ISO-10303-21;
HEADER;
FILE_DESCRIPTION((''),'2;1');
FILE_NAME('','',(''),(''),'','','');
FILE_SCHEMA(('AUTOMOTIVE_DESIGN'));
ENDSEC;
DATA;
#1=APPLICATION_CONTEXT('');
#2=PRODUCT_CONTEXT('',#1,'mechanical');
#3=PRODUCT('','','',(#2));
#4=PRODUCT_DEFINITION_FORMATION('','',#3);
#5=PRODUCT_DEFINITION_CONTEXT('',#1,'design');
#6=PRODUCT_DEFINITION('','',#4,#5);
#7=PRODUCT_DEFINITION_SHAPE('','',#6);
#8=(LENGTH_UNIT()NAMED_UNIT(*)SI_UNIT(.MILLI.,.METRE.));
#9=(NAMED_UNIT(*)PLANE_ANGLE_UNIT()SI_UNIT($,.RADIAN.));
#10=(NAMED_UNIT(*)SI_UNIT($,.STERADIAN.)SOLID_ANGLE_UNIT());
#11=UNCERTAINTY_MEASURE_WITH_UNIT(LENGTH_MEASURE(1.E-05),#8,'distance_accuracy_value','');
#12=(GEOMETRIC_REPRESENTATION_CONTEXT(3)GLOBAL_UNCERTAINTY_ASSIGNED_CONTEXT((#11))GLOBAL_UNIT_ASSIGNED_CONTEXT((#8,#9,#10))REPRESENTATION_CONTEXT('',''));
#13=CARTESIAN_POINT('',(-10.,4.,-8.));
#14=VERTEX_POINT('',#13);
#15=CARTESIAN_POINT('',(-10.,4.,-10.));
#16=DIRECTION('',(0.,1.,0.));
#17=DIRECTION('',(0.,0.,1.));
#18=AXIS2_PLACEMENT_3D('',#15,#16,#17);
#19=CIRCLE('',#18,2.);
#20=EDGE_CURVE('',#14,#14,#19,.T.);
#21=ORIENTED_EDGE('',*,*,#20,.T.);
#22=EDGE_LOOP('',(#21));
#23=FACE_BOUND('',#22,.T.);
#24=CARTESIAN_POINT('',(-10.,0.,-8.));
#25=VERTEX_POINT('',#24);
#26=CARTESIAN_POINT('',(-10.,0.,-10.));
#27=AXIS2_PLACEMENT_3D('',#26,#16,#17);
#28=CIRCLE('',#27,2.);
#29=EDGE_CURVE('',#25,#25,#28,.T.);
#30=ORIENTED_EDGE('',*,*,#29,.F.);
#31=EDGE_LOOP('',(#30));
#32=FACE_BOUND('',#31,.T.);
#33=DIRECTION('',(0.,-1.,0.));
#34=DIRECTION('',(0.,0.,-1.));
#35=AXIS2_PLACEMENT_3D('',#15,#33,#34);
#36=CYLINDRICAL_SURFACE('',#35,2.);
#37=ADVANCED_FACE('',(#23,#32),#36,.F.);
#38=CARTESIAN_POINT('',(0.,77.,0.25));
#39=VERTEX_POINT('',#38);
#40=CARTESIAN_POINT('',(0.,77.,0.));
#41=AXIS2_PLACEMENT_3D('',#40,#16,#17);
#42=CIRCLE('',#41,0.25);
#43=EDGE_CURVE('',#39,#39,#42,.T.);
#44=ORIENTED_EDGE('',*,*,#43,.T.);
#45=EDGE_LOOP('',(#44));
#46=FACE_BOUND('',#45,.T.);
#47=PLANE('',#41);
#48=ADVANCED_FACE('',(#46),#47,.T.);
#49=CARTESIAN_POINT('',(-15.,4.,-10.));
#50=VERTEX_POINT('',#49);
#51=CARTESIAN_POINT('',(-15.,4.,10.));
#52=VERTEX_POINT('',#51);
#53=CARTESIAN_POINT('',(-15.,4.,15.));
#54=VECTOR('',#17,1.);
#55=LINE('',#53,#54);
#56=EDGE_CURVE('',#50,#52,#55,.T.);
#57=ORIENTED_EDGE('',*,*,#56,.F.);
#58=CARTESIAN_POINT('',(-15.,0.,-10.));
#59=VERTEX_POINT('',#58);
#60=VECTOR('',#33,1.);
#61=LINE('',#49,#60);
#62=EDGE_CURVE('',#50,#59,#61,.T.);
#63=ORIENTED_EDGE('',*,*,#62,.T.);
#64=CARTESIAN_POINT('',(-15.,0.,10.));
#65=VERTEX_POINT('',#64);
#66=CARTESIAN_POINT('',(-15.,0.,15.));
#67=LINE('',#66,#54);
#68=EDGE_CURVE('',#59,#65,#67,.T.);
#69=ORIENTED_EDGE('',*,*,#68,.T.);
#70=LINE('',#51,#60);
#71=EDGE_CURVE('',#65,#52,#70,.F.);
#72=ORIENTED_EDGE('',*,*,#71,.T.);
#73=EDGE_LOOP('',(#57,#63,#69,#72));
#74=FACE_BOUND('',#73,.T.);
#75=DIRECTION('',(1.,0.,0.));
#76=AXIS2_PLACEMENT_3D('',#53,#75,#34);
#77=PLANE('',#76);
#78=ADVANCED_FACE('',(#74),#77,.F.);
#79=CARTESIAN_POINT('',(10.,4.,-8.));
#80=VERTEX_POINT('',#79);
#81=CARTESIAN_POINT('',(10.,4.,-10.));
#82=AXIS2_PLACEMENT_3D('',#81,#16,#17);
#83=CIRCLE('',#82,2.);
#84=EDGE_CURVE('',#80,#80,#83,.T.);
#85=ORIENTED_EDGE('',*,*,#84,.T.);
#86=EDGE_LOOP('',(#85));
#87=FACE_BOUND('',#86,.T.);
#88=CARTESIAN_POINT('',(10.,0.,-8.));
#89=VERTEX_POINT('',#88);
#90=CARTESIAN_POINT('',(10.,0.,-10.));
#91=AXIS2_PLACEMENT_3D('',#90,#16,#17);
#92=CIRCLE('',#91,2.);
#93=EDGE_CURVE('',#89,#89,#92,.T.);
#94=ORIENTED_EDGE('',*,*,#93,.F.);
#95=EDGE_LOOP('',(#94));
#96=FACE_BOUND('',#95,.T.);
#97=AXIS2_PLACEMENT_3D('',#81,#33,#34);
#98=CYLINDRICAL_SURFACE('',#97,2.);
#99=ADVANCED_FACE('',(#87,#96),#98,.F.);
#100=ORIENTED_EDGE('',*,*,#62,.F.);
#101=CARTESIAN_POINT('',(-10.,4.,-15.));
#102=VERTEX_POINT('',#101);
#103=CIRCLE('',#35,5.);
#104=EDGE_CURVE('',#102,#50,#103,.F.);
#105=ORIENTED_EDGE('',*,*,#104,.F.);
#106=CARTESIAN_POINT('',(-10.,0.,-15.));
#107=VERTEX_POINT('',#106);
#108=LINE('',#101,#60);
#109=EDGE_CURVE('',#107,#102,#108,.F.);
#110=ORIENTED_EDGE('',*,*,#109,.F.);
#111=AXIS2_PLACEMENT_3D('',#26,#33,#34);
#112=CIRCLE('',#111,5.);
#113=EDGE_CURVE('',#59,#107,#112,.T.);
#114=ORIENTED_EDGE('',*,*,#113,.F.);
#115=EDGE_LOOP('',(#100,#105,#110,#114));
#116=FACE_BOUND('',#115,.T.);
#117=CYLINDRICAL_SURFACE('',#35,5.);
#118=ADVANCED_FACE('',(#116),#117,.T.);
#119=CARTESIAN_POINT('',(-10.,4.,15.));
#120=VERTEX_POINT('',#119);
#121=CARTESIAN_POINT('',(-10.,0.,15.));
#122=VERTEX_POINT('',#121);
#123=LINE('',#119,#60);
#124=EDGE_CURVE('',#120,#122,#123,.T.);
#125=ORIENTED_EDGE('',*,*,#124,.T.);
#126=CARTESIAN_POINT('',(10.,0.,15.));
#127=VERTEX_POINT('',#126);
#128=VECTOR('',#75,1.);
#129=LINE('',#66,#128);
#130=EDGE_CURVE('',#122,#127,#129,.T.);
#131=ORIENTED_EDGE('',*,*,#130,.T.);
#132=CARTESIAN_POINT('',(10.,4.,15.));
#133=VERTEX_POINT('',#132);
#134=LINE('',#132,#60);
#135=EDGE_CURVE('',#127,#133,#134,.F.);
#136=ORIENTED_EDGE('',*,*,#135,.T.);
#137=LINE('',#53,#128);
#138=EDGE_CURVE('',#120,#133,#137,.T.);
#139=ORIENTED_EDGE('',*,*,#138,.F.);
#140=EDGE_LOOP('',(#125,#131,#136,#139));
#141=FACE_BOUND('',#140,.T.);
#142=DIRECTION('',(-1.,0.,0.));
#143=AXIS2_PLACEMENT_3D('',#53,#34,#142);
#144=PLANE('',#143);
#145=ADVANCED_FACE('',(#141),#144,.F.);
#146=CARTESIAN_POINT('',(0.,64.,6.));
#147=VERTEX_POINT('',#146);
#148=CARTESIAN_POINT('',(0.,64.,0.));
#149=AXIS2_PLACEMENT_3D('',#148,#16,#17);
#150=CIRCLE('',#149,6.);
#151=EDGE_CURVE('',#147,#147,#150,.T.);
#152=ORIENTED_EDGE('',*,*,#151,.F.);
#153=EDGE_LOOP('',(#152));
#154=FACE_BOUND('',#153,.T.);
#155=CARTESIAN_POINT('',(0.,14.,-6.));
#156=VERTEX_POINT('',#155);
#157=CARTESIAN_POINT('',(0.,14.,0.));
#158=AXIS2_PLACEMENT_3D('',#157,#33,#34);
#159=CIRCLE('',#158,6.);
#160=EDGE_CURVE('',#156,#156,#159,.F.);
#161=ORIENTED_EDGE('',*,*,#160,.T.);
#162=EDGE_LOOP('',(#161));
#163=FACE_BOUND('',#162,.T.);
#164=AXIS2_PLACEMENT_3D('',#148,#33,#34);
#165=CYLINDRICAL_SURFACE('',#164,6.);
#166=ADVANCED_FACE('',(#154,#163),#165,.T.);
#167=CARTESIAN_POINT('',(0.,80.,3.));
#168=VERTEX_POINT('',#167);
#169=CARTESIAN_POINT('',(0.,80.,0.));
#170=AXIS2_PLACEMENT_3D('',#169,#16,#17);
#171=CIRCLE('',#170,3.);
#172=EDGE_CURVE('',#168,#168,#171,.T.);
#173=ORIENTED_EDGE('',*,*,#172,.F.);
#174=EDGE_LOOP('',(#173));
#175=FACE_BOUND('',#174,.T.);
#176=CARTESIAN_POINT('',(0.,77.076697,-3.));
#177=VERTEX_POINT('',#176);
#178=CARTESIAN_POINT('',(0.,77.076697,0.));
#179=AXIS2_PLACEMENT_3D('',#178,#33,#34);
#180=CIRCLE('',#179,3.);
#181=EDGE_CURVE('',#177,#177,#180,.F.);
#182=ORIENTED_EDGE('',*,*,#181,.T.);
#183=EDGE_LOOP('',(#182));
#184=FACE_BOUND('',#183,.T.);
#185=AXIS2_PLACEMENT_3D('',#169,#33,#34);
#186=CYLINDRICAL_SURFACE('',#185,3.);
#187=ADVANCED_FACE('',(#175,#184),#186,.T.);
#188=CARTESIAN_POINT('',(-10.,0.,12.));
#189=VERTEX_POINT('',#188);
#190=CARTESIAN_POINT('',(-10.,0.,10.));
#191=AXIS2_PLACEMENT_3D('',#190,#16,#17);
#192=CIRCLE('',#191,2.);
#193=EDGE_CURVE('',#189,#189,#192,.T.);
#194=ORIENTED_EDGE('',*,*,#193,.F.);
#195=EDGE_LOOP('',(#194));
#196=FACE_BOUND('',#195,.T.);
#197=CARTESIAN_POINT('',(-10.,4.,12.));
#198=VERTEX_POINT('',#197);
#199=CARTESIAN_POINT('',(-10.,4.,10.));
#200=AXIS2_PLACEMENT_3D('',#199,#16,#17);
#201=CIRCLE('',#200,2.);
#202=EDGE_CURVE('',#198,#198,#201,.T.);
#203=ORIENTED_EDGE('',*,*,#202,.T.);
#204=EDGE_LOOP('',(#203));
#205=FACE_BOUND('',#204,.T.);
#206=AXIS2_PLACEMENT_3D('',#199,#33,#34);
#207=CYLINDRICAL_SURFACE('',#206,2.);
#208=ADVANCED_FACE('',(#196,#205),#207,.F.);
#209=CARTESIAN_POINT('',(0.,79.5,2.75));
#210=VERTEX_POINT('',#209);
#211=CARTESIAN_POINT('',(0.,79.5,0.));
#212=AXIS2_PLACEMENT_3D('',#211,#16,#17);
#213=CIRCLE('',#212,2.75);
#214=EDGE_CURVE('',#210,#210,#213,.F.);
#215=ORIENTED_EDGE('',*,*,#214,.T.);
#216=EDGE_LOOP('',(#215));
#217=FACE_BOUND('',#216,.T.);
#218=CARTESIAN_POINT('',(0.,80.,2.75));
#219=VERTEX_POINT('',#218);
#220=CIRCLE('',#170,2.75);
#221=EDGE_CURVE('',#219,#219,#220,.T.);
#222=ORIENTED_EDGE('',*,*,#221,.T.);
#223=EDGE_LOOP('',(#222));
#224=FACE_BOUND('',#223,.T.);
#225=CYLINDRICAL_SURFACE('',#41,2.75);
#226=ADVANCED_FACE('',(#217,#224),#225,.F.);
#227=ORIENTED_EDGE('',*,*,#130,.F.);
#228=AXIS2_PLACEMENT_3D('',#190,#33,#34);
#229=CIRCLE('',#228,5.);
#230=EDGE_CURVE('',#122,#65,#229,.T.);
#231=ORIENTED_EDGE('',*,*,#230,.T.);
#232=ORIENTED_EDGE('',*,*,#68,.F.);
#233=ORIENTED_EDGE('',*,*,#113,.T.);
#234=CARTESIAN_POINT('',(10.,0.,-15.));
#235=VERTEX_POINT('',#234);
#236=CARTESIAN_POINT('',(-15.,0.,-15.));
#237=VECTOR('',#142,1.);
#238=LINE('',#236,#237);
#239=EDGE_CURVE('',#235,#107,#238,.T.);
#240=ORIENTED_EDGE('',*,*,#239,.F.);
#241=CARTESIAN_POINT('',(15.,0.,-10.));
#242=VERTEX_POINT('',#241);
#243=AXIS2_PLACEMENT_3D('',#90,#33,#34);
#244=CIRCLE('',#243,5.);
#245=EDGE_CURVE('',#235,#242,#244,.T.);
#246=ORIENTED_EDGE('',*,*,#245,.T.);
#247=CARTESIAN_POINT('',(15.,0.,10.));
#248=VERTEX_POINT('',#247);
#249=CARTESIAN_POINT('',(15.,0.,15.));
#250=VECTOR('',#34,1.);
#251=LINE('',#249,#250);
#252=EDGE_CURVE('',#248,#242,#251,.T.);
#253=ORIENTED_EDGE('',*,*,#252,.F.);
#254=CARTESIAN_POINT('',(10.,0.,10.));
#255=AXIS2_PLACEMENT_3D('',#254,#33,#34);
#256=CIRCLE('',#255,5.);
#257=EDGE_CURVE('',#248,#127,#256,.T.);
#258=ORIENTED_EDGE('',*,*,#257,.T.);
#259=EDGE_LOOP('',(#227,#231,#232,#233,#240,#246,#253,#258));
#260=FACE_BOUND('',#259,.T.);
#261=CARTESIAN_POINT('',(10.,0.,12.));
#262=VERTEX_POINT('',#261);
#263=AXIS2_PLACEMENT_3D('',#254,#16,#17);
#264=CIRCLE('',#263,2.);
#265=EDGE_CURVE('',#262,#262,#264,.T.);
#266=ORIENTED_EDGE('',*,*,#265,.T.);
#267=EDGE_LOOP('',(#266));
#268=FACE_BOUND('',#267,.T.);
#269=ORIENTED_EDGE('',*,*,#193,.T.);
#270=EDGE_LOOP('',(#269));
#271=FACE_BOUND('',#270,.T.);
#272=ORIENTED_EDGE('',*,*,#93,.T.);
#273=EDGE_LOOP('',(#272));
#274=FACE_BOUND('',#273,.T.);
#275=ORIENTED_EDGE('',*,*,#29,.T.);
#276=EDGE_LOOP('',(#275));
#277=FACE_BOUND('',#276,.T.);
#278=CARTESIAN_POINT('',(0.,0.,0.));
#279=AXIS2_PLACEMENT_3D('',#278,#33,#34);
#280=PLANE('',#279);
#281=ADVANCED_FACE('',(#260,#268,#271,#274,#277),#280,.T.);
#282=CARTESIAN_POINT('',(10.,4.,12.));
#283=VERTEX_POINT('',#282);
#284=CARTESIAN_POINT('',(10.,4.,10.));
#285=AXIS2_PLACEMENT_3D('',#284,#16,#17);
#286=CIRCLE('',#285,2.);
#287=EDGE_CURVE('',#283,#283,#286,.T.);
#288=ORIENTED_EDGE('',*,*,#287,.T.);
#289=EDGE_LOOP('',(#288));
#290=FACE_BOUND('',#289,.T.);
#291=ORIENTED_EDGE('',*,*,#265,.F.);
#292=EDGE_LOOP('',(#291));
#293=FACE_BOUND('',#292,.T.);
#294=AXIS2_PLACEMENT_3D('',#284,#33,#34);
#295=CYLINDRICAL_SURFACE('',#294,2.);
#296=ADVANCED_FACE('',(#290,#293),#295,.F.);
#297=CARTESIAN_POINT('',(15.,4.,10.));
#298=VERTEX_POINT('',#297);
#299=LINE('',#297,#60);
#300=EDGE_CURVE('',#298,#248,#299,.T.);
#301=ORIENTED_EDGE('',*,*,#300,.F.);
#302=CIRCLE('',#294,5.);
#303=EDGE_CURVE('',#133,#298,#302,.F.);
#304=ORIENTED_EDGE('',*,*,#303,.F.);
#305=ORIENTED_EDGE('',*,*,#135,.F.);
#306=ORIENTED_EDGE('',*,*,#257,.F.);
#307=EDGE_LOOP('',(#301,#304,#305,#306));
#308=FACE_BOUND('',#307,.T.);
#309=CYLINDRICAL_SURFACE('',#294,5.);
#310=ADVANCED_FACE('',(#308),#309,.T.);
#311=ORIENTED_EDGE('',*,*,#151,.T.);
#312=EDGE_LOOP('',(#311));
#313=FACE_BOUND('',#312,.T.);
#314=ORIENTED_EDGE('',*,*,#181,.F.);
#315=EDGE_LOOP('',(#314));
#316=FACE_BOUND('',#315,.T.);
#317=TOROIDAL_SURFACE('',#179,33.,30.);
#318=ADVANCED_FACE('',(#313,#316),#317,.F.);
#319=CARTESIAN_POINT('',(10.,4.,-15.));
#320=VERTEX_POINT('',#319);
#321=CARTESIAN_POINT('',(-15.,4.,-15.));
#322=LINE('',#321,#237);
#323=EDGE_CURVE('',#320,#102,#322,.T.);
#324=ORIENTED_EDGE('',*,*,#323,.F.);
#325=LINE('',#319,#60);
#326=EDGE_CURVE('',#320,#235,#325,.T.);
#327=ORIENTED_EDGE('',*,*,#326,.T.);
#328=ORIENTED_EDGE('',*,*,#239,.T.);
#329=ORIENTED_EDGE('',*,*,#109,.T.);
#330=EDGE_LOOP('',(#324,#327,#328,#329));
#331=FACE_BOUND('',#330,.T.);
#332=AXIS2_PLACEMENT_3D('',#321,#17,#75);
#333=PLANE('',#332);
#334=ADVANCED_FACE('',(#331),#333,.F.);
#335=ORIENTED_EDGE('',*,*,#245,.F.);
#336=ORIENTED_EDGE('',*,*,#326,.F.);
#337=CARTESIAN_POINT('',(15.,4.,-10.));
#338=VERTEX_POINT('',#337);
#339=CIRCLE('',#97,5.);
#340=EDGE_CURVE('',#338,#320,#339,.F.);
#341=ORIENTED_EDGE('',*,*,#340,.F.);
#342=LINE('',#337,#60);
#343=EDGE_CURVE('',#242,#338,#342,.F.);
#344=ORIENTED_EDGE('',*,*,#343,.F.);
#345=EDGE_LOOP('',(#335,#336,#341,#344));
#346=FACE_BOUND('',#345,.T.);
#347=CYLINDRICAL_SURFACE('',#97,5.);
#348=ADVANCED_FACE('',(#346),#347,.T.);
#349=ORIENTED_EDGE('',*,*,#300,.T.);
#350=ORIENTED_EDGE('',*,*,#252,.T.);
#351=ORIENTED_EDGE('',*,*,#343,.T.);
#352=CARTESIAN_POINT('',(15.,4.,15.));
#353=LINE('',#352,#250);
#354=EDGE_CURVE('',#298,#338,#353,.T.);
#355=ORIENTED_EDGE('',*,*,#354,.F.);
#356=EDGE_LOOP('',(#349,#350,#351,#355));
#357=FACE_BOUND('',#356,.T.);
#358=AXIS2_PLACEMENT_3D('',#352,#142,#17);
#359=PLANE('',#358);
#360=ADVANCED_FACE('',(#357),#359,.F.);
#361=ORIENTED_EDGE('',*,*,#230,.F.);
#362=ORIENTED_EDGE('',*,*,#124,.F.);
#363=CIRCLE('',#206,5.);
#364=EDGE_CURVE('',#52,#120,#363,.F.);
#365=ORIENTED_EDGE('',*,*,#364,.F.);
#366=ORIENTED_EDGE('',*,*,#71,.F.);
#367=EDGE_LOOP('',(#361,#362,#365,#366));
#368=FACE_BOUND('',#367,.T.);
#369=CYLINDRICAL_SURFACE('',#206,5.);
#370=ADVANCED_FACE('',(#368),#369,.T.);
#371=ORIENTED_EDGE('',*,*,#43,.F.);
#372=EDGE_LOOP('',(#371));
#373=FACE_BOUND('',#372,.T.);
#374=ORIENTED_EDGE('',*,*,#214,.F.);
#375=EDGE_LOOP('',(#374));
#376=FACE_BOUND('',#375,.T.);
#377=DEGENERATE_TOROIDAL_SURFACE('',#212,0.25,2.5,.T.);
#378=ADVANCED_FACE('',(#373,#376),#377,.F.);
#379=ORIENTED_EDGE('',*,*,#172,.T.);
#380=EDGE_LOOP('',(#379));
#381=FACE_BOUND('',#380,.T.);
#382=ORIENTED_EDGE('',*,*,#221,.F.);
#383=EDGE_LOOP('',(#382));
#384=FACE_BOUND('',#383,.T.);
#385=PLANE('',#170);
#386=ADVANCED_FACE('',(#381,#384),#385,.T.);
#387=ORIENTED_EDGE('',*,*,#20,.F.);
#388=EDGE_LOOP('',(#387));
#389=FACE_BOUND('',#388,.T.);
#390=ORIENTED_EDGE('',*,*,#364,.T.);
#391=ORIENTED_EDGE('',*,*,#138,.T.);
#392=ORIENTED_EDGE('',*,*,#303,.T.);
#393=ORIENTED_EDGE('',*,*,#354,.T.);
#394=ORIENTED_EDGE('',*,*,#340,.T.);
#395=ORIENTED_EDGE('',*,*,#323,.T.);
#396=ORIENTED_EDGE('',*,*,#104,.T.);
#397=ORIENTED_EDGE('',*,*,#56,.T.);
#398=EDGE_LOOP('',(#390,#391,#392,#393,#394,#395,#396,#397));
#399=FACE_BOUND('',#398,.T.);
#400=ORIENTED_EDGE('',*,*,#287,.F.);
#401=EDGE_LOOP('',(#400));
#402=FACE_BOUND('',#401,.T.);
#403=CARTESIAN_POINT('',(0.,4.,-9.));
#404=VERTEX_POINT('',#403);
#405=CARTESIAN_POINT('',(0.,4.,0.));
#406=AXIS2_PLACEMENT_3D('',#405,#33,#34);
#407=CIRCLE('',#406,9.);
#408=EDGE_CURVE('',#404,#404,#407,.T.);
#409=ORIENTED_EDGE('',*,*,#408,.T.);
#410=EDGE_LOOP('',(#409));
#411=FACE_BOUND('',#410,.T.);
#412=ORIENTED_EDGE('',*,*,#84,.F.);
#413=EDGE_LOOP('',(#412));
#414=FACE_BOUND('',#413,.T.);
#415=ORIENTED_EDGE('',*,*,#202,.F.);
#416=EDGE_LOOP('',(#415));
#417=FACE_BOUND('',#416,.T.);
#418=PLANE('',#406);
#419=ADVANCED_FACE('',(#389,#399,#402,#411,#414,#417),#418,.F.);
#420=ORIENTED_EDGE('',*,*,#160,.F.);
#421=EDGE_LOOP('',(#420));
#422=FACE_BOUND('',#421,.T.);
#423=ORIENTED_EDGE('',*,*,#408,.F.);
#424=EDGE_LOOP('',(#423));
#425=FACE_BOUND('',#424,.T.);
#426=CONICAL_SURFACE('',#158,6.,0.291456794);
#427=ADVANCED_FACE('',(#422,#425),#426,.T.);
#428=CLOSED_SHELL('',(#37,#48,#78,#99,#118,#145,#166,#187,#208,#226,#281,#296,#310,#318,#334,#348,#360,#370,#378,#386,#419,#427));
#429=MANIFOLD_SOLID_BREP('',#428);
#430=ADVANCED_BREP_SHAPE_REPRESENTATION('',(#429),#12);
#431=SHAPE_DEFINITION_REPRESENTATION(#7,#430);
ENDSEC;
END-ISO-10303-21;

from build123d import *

# Parameters (mm, degrees)
SKETCH_1_W          = 30
SKETCH_1_H          = 30
SKETCH_1_R          = 2
EXTRUDE_1_DEPTH     = 4
FILLET_1_R          = 5
SKETCH_2_R          = 6
EXTRUDE_2_DEPTH     = 60
SKETCH_3_R          = 3
EXTRUDE_3_DEPTH     = 16
FILLET_2_R          = 30
SKETCH_4_R          = 2.75
CUT_EXTRUDE_1_DEPTH = 3
FILLET_3_R          = 2.5
CHAMFER_4_SIZE      = 10
CHAMFER_4_SIZE2     = 3


with BuildPart() as part:
    # Эскиз1 → Бобышка-Вытянуть1 (new body)
    with BuildSketch(Plane(origin=(0, 0, 0), x_dir=(1, 0, 0), z_dir=(0, 1, 0))):
        Rectangle(SKETCH_1_W, SKETCH_1_H)
        with Locations(Location((-10, 10, 0), (0, 0, 270))):
            Circle(SKETCH_1_R, mode=Mode.SUBTRACT)
        with Locations(Location((10, 10, 0), (0, 0, 270))):
            Circle(SKETCH_1_R, mode=Mode.SUBTRACT)
        with Locations(Location((10, -10, 0), (0, 0, 270))):
            Circle(SKETCH_1_R, mode=Mode.SUBTRACT)
        with Locations(Location((-10, -10, 0), (0, 0, 270))):
            Circle(SKETCH_1_R, mode=Mode.SUBTRACT)
    extrude(amount=EXTRUDE_1_DEPTH)

    # Скругление1
    fillet_1_edges = [part.edges().sort_by_distance(p)[0] for p in [
        (15, 2, 15),
        (-15, 2, 15),
        (-15, 2, -15),
        (15, 2, -15),
    ]]
    fillet(fillet_1_edges, radius=FILLET_1_R)

    # Эскиз2 → Бобышка-Вытянуть2 (add)
    with BuildSketch(Plane(origin=(0, 4, 0), x_dir=(1, 0, 0), z_dir=(0, 1, 0))):
        with Locations(Location((0, 0, 0), (0, 0, 270))):
            Circle(SKETCH_2_R)
    extrude(amount=EXTRUDE_2_DEPTH)

    # Эскиз3 → Бобышка-Вытянуть3 (add)
    with BuildSketch(Plane(origin=(0, 64, 0), x_dir=(1, 0, 0), z_dir=(0, 1, 0))):
        with Locations(Location((0, 0, 0), (0, 0, 270))):
            Circle(SKETCH_3_R)
    extrude(amount=EXTRUDE_3_DEPTH)

    # Скругление2
    # the kernel refuses this fillet: 30 mm, written as the material it adds along each edge
    with BuildSketch(Plane(origin=(0, 64, 0), x_dir=(0, 0, 1), z_dir=(-1, 0, 0))) as fillet_2_piece_1:
        with BuildLine():
            CenterArc((33, 13.076696831), FILLET_2_R, 180, 25.841932763)
            Line((3, 13.076696831), (2.4, 13.076696831))
            Line((2.4, 13.076696831), (2.4, 0))
            Line((2.4, 0), (3, -0.6))
            ThreePointArc((3, -0.6), (4.5, -0.6), (5.46, -0.261533937))
            Line((5.46, -0.261533937), (6, 0))
        make_face()
    revolve(axis=Axis((0, 64, 0), (0, 1, 0)))

    # Эскиз4 → Вырез-Вытянуть1 (cut)
    with BuildSketch(Plane(origin=(0, 80, 0), x_dir=(1, 0, 0), z_dir=(0, 1, 0))):
        with Locations(Location((0, 0, 0), (0, 0, 270))):
            Circle(SKETCH_4_R)
    extrude(amount=-CUT_EXTRUDE_1_DEPTH, mode=Mode.SUBTRACT)

    # Скругление3
    fillet_3_edges = [part.edges().sort_by_distance(p)[0] for p in [
        (0, 77, -2.75),
    ]]
    fillet(fillet_3_edges, radius=FILLET_3_R)

    # Chamfer 4
    chamfer_4_edges = [part.edges().sort_by_distance(p)[0] for p in [
        (0, 4, -6),
    ]]
    chamfer_4_side = [part.faces().sort_by_distance(p)[0] for p in [
        (0, 34, -6),
    ]]
    chamfer(chamfer_4_edges, length=CHAMFER_4_SIZE, length2=CHAMFER_4_SIZE2, reference=chamfer_4_side[0])


solid = part.part
